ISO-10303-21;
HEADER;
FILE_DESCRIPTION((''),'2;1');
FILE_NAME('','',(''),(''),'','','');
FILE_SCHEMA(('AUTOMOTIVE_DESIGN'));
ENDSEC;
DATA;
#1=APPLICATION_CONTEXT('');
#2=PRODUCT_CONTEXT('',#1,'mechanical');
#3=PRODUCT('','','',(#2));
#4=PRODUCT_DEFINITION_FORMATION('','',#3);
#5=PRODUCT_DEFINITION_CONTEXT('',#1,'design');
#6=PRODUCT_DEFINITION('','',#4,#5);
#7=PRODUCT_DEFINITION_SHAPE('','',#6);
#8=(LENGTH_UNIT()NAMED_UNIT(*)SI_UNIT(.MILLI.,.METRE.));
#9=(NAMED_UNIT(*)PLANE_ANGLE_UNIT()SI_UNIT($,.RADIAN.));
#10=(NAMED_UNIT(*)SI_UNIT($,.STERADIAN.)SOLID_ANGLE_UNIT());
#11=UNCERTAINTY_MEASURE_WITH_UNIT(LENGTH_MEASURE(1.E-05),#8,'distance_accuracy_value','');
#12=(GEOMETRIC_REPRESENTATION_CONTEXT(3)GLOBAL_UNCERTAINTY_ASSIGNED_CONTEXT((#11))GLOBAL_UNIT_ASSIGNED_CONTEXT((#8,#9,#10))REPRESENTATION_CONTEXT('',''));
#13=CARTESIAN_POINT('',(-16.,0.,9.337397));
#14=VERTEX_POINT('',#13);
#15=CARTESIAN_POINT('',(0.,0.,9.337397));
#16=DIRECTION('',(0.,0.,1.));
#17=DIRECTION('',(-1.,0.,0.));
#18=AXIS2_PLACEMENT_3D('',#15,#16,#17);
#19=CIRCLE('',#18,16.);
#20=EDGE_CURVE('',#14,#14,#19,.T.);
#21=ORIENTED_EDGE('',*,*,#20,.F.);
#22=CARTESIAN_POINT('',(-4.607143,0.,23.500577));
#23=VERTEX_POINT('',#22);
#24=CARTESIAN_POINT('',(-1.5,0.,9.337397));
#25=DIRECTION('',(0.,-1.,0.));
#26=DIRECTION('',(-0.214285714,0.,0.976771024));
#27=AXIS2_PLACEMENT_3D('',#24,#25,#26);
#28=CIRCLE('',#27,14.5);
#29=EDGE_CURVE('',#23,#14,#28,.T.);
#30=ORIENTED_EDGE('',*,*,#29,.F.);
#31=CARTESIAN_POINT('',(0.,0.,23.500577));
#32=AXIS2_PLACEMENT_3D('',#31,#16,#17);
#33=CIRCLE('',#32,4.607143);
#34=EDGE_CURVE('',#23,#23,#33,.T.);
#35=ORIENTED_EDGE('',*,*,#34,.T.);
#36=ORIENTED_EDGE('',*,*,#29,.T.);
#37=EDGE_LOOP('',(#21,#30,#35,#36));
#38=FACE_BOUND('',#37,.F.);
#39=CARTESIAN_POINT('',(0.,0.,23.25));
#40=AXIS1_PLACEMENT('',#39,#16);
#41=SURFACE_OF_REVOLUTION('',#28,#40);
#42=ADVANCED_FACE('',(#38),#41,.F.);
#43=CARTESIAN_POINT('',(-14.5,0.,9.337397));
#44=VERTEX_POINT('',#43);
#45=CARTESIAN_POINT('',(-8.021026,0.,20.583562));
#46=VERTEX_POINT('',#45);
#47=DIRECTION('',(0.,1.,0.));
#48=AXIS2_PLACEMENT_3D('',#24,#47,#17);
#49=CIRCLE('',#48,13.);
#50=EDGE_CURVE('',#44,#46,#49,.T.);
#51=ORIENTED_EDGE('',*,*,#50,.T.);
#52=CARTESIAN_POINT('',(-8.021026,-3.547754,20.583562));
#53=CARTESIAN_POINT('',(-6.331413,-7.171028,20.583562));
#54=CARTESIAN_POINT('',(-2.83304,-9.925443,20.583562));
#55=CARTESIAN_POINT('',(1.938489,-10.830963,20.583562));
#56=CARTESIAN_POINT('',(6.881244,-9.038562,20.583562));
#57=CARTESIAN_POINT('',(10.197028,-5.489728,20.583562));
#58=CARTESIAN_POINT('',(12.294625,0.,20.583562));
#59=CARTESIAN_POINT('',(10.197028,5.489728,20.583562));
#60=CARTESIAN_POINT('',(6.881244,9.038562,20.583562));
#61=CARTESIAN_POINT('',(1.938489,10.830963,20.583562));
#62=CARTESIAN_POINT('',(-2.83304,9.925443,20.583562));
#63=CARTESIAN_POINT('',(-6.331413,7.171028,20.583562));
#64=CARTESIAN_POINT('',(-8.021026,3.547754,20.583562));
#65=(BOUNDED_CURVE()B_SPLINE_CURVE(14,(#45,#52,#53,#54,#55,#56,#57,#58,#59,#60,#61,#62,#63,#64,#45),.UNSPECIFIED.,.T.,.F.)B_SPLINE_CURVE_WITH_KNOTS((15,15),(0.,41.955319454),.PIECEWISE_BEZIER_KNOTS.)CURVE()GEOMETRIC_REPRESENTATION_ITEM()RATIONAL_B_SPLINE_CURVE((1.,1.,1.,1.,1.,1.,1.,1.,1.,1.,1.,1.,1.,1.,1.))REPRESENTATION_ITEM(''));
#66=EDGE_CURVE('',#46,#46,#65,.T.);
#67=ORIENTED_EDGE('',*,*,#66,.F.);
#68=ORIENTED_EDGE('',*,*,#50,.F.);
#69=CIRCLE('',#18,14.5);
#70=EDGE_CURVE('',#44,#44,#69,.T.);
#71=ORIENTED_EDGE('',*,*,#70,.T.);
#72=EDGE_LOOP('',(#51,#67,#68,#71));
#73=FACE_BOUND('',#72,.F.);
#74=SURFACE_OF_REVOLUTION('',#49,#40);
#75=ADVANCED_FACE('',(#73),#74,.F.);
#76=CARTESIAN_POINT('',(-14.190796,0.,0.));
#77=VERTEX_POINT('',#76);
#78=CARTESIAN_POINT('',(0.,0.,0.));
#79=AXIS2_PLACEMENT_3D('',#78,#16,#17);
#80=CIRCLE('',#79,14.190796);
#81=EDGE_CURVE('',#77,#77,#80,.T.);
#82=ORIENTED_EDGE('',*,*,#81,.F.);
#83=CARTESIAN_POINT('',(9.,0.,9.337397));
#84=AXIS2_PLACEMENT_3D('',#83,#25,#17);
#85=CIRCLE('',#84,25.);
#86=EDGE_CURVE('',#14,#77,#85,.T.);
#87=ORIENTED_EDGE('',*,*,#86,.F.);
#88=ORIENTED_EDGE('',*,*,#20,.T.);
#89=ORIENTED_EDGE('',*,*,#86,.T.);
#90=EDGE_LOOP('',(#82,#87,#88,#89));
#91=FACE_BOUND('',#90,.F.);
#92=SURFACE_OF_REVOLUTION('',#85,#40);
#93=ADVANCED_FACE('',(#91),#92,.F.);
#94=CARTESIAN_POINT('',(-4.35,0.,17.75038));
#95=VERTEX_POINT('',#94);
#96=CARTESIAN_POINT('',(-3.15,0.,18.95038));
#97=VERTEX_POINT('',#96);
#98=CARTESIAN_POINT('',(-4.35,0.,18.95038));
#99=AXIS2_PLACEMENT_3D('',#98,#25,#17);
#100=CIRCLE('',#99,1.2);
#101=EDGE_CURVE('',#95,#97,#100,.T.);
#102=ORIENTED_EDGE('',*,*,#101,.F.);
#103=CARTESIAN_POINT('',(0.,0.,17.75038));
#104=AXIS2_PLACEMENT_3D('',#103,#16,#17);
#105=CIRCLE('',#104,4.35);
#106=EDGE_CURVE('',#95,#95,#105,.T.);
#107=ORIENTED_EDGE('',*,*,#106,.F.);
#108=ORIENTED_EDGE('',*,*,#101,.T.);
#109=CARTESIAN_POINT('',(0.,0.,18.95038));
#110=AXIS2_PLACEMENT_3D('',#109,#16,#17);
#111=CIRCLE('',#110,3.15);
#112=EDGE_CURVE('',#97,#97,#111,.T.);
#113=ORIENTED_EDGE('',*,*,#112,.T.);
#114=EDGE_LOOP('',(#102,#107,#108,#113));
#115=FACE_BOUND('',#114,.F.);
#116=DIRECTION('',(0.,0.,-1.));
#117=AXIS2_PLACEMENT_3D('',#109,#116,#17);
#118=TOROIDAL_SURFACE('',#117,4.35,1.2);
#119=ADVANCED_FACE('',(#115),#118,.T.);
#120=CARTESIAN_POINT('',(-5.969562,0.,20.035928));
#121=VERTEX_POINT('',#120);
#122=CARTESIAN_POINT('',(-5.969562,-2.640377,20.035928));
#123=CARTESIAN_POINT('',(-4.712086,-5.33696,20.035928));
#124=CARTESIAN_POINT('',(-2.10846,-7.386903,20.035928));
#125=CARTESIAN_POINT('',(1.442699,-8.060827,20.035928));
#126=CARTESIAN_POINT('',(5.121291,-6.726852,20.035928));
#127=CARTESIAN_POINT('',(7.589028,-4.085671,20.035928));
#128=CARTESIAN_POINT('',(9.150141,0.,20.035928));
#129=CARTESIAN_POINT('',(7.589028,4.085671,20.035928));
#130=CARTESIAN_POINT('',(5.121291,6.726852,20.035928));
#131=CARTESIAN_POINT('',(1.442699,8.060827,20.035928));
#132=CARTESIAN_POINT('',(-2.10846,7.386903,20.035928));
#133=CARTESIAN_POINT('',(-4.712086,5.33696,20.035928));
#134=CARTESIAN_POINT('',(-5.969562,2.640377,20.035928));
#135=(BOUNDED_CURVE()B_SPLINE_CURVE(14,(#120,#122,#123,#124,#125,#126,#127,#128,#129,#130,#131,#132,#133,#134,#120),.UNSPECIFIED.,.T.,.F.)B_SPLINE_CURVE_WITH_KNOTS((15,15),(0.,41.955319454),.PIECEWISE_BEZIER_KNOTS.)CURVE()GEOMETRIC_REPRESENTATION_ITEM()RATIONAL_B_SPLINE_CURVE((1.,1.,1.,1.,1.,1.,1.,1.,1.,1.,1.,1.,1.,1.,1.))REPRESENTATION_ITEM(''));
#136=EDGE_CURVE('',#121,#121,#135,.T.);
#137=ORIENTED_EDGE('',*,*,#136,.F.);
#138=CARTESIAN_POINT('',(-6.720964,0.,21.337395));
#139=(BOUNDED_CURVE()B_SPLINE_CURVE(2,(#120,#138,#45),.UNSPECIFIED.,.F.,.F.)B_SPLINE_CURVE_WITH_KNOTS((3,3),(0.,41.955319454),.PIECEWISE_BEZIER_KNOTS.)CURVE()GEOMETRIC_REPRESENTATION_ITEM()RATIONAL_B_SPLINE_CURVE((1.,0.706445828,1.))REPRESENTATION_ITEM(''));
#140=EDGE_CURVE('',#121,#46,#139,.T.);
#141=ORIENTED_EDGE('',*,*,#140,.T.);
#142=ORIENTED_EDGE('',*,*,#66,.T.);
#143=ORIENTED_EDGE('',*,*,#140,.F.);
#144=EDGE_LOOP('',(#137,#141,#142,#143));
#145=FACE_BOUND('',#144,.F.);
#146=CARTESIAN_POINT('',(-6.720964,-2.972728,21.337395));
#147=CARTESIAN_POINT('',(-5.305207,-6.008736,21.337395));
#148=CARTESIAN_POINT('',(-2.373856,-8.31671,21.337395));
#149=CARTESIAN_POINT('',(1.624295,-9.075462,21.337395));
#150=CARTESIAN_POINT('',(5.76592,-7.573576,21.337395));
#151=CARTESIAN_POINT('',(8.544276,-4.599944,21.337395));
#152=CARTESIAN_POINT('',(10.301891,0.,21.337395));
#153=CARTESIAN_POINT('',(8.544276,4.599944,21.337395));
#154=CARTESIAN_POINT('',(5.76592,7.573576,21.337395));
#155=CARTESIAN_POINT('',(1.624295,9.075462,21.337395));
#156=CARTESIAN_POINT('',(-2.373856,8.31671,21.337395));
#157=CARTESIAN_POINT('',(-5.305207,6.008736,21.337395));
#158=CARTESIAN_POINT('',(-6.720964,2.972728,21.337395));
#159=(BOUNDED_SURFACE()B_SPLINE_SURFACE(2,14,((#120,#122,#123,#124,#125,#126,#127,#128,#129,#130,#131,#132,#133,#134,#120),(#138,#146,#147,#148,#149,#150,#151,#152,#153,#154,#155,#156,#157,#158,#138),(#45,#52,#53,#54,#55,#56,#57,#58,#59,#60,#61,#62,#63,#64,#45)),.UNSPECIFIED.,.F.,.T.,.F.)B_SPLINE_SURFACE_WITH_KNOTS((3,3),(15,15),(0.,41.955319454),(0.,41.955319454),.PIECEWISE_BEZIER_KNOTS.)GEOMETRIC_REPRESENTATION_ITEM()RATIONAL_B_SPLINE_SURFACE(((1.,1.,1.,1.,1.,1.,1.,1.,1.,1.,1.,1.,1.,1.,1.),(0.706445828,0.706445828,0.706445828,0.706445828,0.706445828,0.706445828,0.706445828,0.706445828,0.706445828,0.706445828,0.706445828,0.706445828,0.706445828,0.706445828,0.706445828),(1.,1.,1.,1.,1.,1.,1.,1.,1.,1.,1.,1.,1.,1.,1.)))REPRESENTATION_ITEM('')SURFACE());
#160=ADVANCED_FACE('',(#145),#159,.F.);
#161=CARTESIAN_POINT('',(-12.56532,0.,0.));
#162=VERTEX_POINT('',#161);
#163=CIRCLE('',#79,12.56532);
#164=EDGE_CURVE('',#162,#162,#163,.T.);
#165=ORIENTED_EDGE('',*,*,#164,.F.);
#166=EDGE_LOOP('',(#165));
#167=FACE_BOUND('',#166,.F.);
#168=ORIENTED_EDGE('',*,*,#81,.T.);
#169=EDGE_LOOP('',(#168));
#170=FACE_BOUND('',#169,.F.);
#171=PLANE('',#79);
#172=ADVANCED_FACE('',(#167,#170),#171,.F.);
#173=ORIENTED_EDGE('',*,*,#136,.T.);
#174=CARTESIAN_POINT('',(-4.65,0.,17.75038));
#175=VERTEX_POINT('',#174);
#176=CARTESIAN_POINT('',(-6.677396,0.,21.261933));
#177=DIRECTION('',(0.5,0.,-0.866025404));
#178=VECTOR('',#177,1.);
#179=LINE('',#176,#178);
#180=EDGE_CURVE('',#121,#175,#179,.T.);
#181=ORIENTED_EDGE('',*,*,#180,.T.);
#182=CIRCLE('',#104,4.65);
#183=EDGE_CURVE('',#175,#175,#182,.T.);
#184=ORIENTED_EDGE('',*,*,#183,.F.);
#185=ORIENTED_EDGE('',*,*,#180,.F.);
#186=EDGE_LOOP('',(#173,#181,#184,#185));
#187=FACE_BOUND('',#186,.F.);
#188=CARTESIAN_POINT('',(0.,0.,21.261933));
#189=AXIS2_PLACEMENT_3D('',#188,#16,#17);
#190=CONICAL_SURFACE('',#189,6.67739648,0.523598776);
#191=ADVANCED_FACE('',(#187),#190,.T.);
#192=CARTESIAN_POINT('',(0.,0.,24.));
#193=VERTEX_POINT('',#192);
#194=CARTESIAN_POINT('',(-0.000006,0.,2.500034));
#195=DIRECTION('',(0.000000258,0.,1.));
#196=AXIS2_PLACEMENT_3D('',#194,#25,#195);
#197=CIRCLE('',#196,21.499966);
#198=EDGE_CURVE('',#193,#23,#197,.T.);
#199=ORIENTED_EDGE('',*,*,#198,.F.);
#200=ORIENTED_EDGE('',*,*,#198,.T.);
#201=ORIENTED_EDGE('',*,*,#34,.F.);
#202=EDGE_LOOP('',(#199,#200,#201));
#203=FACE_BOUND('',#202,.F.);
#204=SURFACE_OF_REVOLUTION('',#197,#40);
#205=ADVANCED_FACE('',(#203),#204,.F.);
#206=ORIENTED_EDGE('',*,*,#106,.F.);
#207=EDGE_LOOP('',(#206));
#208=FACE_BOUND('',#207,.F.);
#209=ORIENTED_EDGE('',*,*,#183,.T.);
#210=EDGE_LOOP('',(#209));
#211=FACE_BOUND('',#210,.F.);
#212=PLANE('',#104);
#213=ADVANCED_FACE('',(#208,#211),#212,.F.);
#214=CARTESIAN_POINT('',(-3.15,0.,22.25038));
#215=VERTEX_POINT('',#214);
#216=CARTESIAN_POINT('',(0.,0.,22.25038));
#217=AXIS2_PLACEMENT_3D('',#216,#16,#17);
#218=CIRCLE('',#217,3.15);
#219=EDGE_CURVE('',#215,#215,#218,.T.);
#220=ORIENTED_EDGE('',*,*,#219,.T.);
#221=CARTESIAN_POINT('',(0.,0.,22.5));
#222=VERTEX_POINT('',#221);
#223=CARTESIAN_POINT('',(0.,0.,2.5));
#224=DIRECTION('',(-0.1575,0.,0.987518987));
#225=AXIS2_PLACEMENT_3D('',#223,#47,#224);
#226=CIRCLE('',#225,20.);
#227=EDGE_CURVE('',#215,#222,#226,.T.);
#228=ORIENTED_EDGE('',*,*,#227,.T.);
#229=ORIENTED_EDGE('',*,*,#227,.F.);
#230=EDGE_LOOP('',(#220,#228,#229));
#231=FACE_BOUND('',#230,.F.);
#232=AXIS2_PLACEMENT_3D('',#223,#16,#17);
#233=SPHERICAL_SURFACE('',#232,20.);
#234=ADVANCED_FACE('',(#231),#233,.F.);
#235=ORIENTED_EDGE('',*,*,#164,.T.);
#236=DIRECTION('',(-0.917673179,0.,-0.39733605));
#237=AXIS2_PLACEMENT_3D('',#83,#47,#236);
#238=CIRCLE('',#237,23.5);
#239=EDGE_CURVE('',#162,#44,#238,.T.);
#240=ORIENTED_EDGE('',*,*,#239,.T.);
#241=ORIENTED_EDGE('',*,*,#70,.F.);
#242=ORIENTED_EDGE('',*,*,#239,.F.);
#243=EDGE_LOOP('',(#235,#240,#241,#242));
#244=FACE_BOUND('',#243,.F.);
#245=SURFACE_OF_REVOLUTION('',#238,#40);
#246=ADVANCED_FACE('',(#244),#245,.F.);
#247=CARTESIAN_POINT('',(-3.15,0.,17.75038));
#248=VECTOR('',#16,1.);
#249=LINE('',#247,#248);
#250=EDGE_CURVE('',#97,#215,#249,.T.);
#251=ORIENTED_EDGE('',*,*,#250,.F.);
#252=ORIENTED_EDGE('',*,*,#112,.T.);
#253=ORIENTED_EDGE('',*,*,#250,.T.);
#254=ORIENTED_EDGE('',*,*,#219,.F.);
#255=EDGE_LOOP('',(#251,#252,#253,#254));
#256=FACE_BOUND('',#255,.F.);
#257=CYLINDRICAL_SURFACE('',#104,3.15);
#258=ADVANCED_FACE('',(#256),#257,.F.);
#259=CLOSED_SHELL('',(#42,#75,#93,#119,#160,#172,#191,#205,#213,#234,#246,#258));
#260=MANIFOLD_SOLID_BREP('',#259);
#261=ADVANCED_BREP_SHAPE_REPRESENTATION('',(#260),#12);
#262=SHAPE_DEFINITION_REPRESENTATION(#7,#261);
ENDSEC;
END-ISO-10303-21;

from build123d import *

# Parameters (mm, degrees)
F2_R = 1.2
F3_R = 1.5


# Not quite as in the source:
# - ends of sketch curves that miss each other by under 0.0002 mm in the source are joined


with BuildPart() as f1:
    # F0 (on Front) → F1 (revolve)
    with BuildSketch(Plane.XZ):
        with BuildLine():
            ThreePointArc((-4.2857142857, 22.0354204731), (-4.4681645184, 21.9940159633), (-4.65, 21.949990079))
            Line((-4.65, 21.949990079), (-4.65, 17.7503797432))
            Line((-4.65, 17.7503797432), (-3.15, 17.7503797432))
            Line((-3.15, 17.7503797432), (-3.15, 22.2503797432))
            ThreePointArc((-3.15, 22.2503797432), (-3.7194103843, 22.1511064929), (-4.2857142857, 22.0354204731))
        make_face()
        with BuildLine():
            ThreePointArc((-6.6773964801, 21.2619334538), (-5.6778868479, 21.6477692756), (-4.65, 21.949990079))
            ThreePointArc((-4.65, 21.949990079), (-4.4681645184, 21.9940159633), (-4.2857142857, 22.0354204731))
            ThreePointArc((-4.2857142857, 22.0354204731), (-3.7194103843, 22.1511064929), (-3.15, 22.2503797432))
            ThreePointArc((-3.15, 22.2503797432), (-1.5799375203, 22.437497271), (0, 22.5))
            Line((0, 22.5), (0, 24))
            ThreePointArc((0, 24), (-2.3170665414, 23.8747799947), (-4.6071429427, 23.5005773988))
            ThreePointArc((-4.6071429427, 23.5005773988), (-12.7983092871, 18.4257533886), (-16.0000003995, 9.3373971656))
            ThreePointArc((-16.0000003995, 9.3373971656), (-15.5435321148, 4.5818686667), (-14.1907963241, 0))
            Line((-14.1907963241, 0), (-12.5653197095, 0))
            ThreePointArc((-12.5653197095, 0), (-14.0112473931, 4.5695367006), (-14.5, 9.3373971656))
            ThreePointArc((-14.5, 9.3373971656), (-12.3698241532, 16.4680999977), (-6.6773964801, 21.2619334538))
        make_face()
        with BuildLine():
            Line((-4.65, 17.7503797432), (-4.65, 21.949990079))
            ThreePointArc((-4.65, 21.949990079), (-5.6778868479, 21.6477692756), (-6.6773964801, 21.2619334538))
            Line((-6.6773964801, 21.2619334538), (-4.65, 17.7503797432))
        make_face()
    revolve(axis=Axis((0, 0, 23.25), (0, 0, 1)))

    # F2
    f2_edges = [f1.edges().sort_by_distance(p)[0] for p in [
        (3.15, 0, 17.75038),
    ]]
    fillet(f2_edges, radius=F2_R)

    # F3
    f3_edges = [f1.edges().sort_by_distance(p)[0] for p in [
        (6.677396, 0, 21.261933),
    ]]
    fillet(f3_edges, radius=F3_R)


solid = f1.part
